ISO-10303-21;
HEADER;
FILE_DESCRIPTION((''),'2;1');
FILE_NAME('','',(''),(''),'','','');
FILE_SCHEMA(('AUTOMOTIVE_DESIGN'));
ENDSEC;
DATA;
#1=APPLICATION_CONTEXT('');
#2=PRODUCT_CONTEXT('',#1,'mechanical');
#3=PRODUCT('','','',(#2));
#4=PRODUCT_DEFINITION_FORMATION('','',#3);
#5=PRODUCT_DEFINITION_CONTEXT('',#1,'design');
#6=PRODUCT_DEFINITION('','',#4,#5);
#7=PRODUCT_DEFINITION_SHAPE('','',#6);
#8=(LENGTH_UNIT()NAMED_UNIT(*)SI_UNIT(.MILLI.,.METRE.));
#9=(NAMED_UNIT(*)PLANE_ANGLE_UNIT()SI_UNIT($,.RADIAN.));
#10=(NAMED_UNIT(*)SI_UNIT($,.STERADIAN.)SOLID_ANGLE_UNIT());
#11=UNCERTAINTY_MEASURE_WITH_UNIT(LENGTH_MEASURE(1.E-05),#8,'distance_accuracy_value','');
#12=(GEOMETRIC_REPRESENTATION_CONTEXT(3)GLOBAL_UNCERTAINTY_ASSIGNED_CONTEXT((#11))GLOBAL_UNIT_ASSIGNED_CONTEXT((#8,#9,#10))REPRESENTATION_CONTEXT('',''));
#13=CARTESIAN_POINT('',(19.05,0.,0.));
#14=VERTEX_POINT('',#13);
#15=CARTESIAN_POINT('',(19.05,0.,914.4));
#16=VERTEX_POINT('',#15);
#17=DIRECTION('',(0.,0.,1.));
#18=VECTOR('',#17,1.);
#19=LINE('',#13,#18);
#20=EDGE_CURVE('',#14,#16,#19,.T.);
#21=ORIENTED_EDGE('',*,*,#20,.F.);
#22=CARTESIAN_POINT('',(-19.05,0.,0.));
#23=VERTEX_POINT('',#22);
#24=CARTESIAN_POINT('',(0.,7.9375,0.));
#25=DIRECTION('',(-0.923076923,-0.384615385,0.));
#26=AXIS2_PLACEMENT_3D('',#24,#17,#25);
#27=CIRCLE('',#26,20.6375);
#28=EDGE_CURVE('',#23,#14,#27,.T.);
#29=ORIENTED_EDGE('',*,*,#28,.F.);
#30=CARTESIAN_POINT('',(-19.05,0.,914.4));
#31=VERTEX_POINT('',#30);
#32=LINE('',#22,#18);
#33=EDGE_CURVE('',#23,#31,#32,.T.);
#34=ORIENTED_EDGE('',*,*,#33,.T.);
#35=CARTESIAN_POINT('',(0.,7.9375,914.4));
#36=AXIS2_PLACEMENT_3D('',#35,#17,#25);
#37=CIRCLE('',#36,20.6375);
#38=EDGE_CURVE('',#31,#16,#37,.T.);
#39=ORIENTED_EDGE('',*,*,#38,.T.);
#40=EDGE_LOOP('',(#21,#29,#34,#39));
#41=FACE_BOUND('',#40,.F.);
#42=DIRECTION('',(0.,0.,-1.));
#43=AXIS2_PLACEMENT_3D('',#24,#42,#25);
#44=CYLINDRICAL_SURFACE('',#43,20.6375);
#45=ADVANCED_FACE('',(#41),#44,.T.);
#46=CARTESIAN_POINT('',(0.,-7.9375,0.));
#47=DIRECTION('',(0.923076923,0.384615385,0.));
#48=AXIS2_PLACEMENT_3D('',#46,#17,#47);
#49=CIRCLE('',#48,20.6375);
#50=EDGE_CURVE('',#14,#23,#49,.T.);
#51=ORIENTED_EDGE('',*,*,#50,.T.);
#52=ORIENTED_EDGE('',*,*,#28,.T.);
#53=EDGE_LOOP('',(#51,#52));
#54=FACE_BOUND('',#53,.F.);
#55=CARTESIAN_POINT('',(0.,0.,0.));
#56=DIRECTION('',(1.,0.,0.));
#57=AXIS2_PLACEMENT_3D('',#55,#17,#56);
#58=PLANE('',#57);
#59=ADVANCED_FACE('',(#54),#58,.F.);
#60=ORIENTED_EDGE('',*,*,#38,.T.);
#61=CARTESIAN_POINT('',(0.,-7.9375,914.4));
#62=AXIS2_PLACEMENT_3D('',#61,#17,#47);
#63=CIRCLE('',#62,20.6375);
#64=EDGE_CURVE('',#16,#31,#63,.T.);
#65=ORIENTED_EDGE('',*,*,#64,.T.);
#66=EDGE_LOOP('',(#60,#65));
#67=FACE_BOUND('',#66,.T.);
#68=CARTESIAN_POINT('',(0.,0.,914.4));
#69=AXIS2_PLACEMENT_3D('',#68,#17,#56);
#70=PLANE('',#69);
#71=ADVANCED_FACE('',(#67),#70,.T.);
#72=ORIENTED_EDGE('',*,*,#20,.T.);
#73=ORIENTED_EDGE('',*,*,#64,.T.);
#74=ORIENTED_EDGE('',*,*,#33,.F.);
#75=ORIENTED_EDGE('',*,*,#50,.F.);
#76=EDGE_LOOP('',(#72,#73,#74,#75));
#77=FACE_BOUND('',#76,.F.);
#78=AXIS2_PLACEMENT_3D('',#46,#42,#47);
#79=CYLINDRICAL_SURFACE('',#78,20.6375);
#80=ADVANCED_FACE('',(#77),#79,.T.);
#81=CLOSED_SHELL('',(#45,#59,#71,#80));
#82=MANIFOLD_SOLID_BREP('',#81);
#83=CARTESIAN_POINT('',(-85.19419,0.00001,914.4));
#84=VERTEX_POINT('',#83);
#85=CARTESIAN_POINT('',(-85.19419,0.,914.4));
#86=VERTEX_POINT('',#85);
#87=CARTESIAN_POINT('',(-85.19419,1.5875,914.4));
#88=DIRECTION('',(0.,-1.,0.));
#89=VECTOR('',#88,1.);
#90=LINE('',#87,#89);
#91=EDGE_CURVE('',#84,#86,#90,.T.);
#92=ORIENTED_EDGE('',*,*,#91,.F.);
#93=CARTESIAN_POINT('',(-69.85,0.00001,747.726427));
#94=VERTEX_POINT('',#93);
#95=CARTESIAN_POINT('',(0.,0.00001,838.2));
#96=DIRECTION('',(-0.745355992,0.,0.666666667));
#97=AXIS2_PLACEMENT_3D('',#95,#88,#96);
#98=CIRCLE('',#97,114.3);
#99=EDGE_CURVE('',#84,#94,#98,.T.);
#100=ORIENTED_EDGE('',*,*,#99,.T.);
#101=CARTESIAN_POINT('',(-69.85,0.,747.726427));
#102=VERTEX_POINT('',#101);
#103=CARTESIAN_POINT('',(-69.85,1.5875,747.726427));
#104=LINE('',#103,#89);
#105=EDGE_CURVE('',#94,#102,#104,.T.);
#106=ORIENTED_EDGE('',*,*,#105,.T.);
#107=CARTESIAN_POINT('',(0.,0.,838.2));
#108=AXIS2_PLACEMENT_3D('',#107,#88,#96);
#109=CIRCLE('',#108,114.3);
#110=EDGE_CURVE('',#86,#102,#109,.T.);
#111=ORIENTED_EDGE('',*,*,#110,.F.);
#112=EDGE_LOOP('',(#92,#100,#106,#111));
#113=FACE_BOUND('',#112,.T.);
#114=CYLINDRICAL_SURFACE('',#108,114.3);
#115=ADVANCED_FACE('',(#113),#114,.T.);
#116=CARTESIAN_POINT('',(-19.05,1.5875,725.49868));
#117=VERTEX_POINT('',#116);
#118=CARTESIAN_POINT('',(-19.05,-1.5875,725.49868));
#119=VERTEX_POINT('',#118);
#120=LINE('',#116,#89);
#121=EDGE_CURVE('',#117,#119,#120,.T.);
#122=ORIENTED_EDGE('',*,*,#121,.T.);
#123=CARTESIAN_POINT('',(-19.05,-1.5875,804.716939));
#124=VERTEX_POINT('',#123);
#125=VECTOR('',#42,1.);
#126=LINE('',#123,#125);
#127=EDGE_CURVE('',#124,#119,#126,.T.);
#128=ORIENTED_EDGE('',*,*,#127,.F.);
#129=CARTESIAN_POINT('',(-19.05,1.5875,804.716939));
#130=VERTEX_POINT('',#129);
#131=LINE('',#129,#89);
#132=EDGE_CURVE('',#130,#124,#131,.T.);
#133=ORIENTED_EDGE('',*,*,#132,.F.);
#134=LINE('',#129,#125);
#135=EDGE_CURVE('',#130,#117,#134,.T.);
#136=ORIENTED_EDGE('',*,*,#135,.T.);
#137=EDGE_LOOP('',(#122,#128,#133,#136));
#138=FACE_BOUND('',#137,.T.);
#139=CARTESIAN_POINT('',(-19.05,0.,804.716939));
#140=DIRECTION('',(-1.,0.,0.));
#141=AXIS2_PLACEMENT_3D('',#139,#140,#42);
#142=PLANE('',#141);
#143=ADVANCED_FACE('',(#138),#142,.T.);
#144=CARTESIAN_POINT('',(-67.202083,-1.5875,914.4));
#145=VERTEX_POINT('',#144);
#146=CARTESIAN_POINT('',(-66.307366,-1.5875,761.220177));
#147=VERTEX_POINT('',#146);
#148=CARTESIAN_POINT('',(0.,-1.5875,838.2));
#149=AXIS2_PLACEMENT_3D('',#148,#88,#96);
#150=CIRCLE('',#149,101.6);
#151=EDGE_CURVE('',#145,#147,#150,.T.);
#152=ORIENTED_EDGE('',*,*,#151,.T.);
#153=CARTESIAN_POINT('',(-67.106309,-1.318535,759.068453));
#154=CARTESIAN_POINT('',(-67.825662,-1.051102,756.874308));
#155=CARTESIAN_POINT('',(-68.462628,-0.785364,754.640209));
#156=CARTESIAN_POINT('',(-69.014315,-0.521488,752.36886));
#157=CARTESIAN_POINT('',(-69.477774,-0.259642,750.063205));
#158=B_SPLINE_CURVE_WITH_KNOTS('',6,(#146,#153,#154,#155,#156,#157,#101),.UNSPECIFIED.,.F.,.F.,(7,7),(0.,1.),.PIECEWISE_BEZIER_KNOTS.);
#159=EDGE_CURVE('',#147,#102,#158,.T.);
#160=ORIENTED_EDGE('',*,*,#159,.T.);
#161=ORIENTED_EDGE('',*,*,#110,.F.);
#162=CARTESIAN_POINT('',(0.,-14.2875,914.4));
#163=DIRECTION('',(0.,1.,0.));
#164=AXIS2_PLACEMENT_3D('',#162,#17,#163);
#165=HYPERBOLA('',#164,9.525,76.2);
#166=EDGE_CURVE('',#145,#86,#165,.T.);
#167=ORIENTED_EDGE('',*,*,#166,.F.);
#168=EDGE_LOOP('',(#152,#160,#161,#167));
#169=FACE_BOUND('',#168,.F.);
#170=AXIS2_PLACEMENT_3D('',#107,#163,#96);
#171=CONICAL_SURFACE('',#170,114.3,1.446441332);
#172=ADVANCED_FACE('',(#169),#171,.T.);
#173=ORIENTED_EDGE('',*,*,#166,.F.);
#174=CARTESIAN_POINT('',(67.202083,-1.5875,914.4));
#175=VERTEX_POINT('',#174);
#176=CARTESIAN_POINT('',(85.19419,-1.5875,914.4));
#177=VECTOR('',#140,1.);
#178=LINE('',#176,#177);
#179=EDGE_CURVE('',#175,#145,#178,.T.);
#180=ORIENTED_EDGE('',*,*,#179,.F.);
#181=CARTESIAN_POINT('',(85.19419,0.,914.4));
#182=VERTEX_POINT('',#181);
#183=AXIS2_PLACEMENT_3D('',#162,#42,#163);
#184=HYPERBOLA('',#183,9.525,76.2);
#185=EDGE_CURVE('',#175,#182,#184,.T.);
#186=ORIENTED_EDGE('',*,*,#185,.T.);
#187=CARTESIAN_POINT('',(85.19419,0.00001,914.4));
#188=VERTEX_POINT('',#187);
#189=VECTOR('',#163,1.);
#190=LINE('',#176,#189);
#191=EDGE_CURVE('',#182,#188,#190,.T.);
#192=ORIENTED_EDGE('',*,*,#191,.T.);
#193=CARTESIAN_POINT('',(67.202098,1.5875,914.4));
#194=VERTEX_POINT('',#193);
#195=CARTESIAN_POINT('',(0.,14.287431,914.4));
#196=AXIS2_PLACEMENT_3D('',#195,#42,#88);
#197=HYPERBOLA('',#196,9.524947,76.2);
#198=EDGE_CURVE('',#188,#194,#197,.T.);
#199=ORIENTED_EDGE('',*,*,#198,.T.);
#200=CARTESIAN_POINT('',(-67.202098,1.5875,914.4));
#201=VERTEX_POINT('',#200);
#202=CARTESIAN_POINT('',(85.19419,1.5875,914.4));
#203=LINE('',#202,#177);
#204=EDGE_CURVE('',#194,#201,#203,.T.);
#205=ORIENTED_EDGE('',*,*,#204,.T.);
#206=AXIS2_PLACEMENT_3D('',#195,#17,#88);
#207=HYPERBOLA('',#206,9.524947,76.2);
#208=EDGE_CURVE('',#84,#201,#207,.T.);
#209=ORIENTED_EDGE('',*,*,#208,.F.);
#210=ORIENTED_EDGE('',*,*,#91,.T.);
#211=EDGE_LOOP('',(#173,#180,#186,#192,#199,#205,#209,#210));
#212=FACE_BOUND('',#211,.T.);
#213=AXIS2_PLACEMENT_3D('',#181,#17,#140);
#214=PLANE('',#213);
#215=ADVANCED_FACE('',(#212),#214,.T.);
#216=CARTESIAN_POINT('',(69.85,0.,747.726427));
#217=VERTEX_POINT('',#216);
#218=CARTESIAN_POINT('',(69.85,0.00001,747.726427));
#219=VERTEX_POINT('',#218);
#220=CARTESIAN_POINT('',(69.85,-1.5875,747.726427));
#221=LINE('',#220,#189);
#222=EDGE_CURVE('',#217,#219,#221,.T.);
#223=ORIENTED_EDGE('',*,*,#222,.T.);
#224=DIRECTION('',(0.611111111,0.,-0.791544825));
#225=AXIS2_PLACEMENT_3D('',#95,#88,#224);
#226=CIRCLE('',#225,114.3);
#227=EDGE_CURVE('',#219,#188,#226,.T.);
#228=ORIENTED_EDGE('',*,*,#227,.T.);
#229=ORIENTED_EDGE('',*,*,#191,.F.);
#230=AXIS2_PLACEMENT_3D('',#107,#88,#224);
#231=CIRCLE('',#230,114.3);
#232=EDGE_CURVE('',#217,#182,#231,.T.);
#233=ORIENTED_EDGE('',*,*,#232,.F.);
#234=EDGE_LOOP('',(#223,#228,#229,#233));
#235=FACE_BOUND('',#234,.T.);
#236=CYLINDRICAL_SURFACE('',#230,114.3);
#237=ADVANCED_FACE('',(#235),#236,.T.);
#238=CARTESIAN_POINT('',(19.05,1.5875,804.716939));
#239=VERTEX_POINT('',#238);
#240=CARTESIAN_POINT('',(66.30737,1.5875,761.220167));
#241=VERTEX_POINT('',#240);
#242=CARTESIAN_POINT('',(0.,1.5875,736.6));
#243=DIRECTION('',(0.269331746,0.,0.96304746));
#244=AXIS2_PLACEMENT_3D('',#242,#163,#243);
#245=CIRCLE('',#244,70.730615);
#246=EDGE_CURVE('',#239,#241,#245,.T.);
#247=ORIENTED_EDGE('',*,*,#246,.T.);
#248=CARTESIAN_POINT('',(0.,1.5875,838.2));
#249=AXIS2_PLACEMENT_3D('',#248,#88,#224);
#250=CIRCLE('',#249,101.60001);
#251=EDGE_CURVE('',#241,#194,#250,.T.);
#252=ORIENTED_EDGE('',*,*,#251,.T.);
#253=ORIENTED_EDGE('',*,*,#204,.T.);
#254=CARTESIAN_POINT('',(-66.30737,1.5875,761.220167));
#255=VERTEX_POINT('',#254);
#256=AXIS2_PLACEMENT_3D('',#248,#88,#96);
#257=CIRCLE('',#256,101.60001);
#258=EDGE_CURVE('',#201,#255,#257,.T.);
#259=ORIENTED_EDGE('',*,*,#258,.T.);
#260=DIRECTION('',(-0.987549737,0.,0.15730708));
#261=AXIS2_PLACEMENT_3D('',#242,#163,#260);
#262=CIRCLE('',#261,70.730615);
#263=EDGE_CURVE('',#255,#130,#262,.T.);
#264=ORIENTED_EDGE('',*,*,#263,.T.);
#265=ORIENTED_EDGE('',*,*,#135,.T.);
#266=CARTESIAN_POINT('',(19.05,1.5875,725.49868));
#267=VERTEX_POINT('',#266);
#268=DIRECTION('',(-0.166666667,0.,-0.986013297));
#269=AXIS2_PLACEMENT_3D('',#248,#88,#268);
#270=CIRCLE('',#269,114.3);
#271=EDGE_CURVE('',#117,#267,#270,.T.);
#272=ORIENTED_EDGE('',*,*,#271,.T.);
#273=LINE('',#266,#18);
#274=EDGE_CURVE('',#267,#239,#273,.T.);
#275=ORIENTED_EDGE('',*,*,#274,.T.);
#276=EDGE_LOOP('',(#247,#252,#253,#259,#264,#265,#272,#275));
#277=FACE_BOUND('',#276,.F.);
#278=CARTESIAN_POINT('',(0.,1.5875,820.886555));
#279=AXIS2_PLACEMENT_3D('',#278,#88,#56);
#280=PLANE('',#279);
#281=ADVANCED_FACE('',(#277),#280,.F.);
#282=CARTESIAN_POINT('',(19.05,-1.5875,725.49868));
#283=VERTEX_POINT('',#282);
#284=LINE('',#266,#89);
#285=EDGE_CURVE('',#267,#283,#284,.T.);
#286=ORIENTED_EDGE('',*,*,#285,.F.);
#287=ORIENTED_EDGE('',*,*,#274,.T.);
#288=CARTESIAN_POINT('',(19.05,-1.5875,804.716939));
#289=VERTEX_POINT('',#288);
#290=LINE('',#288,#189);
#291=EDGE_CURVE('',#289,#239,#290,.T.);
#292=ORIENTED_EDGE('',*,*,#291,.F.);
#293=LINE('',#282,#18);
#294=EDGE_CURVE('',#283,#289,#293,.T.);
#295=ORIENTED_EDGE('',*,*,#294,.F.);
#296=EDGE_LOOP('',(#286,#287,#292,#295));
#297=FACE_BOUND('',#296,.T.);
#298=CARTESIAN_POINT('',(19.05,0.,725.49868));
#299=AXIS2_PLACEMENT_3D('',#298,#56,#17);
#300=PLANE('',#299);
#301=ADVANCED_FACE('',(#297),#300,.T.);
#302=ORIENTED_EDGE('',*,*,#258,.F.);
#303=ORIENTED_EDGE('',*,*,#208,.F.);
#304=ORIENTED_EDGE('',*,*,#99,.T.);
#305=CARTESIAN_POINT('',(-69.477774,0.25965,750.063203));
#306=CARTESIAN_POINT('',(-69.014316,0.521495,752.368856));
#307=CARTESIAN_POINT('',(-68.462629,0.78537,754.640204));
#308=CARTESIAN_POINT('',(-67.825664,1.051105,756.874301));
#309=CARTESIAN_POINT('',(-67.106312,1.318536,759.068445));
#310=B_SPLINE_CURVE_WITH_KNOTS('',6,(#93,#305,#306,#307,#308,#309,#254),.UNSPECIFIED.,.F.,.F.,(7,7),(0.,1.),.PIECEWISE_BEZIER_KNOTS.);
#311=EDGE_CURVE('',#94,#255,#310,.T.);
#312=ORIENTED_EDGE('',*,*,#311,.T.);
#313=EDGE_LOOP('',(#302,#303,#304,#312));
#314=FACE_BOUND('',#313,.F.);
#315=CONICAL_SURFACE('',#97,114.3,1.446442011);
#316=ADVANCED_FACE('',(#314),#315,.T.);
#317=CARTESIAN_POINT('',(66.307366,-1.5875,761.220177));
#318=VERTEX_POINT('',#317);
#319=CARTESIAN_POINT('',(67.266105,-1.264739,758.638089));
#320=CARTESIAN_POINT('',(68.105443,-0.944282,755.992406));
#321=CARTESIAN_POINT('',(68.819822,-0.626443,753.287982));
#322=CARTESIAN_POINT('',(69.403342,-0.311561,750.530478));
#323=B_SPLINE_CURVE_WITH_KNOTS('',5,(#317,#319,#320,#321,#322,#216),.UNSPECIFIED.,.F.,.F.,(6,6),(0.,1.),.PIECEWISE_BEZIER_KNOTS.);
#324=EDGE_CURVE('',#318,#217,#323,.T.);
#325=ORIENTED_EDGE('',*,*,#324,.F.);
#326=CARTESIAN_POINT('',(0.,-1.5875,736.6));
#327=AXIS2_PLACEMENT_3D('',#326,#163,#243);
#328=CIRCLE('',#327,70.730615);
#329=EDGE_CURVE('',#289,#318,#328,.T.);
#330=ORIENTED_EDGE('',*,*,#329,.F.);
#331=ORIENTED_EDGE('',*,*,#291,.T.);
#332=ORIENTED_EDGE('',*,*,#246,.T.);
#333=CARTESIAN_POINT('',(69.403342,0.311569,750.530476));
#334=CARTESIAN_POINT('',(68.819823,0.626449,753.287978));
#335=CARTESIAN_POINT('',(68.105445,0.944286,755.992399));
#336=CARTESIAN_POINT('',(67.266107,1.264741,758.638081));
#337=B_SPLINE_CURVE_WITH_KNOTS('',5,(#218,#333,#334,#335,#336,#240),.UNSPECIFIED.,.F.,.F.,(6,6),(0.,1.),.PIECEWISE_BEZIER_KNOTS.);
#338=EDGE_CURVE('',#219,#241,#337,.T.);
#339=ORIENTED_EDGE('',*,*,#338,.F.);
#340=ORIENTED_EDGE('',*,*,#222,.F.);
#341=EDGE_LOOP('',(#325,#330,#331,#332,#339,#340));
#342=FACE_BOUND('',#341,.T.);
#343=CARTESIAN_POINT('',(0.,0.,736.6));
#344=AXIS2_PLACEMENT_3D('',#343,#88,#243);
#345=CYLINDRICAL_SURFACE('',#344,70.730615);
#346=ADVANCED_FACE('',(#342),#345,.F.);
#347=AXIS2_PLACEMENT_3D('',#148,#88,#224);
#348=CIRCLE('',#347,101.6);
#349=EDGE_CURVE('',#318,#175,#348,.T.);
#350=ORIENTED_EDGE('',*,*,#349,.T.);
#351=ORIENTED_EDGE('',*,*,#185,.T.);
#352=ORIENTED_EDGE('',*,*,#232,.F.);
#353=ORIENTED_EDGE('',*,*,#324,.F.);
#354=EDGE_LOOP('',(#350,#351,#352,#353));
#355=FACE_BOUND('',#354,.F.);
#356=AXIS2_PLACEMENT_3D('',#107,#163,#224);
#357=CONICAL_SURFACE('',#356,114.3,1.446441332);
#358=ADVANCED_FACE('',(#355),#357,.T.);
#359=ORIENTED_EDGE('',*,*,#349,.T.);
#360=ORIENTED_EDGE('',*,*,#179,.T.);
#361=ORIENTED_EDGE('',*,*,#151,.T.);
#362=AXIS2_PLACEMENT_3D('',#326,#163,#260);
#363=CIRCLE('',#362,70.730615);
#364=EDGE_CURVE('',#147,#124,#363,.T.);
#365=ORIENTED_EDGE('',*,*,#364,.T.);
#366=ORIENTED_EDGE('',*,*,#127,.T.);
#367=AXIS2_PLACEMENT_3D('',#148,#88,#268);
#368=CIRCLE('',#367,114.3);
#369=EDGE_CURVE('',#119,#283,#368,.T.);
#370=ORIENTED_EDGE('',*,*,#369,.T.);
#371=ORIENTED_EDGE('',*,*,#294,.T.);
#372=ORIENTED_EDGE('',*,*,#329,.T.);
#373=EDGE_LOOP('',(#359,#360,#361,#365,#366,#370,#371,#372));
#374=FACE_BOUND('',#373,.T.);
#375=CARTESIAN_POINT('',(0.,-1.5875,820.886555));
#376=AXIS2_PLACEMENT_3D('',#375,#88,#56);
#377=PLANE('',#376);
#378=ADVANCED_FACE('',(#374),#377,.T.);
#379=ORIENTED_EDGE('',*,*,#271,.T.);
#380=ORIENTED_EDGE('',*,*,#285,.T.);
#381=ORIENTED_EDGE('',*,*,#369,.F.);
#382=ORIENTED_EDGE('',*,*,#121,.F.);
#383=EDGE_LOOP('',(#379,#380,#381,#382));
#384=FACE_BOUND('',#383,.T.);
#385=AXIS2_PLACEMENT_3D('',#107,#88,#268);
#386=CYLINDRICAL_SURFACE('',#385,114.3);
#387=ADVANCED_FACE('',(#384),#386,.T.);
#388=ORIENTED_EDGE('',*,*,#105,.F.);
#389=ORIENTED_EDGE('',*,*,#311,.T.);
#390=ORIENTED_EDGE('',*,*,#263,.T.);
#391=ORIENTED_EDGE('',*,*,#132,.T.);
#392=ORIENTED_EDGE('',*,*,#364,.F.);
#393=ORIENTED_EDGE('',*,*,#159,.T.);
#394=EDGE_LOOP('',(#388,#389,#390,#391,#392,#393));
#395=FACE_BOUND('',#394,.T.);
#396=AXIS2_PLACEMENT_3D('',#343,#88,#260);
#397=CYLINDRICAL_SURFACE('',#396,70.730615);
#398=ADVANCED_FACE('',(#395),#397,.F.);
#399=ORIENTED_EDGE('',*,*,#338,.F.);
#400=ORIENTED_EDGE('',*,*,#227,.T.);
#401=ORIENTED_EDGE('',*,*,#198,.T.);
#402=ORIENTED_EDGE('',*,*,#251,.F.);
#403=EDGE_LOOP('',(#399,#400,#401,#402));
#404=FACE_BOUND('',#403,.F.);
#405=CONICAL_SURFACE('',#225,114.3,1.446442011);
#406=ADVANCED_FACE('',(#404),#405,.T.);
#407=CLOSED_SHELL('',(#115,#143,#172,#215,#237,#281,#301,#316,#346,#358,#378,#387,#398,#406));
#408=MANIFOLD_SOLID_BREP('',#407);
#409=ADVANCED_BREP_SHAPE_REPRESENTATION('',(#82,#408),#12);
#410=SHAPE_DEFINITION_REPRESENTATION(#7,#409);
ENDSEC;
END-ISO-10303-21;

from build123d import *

# Parameters (mm, degrees)
F1_DEPTH      = 914.4
F3_DEPTH      = 1.5875
F3_DEPTH_BACK = 1.5875
F4_SIZE2      = 1.5875
F4_SIZE       = 12.7
F5_SIZE2      = 12.69999
F5_SIZE       = 1.58749
F5_2_SIZE2    = 12.69999
F5_2_SIZE     = 1.58749


# Not quite as in the source:
# - a fillet or chamfer is up to 0.001 mm smaller than in the source, because OpenCascade refuses the exact size


with BuildPart() as f1:
    # F0 (on Top) → F1 (new body)
    with BuildSketch(Plane.XY):
        with BuildLine():
            ThreePointArc((-19.05, 0), (0, -12.7), (19.05, 0))
            ThreePointArc((19.05, 0), (0, 12.7), (-19.05, 0))
        make_face()
    extrude(amount=F1_DEPTH)


with BuildPart() as f3:
    # F2 (on Front) → F3 (new body, two sides)
    with BuildSketch(Plane.XZ) as f3_sk:
        with BuildLine():
            Line((85.1941899427, 914.4), (-85.1941899427, 914.4))
            ThreePointArc((-85.1941899427, 914.4), (-113.8186945704, 827.7217002194), (-69.85, 747.7264265103))
            ThreePointArc((-69.85, 747.7264265103), (-52.7994519478, 783.6641874561), (-19.05, 804.7169389131))
            Line((-19.05, 804.7169389131), (-19.05, 725.498680132))
            ThreePointArc((-19.05, 725.498680132), (0, 723.9), (19.05, 725.498680132))
            Line((19.05, 725.498680132), (19.05, 804.7169389131))
            ThreePointArc((19.05, 804.7169389131), (52.7994519478, 783.6641874561), (69.85, 747.7264265103))
            ThreePointArc((69.85, 747.7264265103), (113.8186945704, 827.7217002194), (85.1941899427, 914.4))
        make_face()
    extrude(amount=F3_DEPTH)
    extrude(f3_sk.sketch, amount=-F3_DEPTH_BACK)

    # F4
    f4_edges = [f3.edges().sort_by_distance(p)[0] for p in [
        (-113.818695, -1.5875, 827.7217),
        (113.818695, -1.5875, 827.7217),
    ]]
    f4_side = f3.faces().sort_by_distance((0, -1.5875, 838.185698))[0]
    chamfer(f4_edges, length=F4_SIZE, length2=F4_SIZE2, reference=f4_side)

    # F5 (size 1.5875 and 12.7 in the source; OpenCascade refuses exactly that, so slightly less here)
    f5_edges = [f3.edges().sort_by_distance(p)[0] for p in [
        (-113.818695, 1.5875, 827.7217),
    ]]
    f5_side = f3.faces().sort_by_distance((-113.818695, 0.79375, 827.7217))[0]
    chamfer(f5_edges, length=F5_SIZE, length2=F5_SIZE2, reference=f5_side)

    # F5#2 (size 1.5875 and 12.7 in the source; OpenCascade refuses exactly that, so slightly less here)
    f5_2_edges = [f3.edges().sort_by_distance(p)[0] for p in [
        (113.818695, 1.5875, 827.7217),
    ]]
    f5_2_side = f3.faces().sort_by_distance((113.818695, 0.79375, 827.7217))[0]
    chamfer(f5_2_edges, length=F5_2_SIZE, length2=F5_2_SIZE2, reference=f5_2_side)


solid = Compound([f1.part, f3.part])
